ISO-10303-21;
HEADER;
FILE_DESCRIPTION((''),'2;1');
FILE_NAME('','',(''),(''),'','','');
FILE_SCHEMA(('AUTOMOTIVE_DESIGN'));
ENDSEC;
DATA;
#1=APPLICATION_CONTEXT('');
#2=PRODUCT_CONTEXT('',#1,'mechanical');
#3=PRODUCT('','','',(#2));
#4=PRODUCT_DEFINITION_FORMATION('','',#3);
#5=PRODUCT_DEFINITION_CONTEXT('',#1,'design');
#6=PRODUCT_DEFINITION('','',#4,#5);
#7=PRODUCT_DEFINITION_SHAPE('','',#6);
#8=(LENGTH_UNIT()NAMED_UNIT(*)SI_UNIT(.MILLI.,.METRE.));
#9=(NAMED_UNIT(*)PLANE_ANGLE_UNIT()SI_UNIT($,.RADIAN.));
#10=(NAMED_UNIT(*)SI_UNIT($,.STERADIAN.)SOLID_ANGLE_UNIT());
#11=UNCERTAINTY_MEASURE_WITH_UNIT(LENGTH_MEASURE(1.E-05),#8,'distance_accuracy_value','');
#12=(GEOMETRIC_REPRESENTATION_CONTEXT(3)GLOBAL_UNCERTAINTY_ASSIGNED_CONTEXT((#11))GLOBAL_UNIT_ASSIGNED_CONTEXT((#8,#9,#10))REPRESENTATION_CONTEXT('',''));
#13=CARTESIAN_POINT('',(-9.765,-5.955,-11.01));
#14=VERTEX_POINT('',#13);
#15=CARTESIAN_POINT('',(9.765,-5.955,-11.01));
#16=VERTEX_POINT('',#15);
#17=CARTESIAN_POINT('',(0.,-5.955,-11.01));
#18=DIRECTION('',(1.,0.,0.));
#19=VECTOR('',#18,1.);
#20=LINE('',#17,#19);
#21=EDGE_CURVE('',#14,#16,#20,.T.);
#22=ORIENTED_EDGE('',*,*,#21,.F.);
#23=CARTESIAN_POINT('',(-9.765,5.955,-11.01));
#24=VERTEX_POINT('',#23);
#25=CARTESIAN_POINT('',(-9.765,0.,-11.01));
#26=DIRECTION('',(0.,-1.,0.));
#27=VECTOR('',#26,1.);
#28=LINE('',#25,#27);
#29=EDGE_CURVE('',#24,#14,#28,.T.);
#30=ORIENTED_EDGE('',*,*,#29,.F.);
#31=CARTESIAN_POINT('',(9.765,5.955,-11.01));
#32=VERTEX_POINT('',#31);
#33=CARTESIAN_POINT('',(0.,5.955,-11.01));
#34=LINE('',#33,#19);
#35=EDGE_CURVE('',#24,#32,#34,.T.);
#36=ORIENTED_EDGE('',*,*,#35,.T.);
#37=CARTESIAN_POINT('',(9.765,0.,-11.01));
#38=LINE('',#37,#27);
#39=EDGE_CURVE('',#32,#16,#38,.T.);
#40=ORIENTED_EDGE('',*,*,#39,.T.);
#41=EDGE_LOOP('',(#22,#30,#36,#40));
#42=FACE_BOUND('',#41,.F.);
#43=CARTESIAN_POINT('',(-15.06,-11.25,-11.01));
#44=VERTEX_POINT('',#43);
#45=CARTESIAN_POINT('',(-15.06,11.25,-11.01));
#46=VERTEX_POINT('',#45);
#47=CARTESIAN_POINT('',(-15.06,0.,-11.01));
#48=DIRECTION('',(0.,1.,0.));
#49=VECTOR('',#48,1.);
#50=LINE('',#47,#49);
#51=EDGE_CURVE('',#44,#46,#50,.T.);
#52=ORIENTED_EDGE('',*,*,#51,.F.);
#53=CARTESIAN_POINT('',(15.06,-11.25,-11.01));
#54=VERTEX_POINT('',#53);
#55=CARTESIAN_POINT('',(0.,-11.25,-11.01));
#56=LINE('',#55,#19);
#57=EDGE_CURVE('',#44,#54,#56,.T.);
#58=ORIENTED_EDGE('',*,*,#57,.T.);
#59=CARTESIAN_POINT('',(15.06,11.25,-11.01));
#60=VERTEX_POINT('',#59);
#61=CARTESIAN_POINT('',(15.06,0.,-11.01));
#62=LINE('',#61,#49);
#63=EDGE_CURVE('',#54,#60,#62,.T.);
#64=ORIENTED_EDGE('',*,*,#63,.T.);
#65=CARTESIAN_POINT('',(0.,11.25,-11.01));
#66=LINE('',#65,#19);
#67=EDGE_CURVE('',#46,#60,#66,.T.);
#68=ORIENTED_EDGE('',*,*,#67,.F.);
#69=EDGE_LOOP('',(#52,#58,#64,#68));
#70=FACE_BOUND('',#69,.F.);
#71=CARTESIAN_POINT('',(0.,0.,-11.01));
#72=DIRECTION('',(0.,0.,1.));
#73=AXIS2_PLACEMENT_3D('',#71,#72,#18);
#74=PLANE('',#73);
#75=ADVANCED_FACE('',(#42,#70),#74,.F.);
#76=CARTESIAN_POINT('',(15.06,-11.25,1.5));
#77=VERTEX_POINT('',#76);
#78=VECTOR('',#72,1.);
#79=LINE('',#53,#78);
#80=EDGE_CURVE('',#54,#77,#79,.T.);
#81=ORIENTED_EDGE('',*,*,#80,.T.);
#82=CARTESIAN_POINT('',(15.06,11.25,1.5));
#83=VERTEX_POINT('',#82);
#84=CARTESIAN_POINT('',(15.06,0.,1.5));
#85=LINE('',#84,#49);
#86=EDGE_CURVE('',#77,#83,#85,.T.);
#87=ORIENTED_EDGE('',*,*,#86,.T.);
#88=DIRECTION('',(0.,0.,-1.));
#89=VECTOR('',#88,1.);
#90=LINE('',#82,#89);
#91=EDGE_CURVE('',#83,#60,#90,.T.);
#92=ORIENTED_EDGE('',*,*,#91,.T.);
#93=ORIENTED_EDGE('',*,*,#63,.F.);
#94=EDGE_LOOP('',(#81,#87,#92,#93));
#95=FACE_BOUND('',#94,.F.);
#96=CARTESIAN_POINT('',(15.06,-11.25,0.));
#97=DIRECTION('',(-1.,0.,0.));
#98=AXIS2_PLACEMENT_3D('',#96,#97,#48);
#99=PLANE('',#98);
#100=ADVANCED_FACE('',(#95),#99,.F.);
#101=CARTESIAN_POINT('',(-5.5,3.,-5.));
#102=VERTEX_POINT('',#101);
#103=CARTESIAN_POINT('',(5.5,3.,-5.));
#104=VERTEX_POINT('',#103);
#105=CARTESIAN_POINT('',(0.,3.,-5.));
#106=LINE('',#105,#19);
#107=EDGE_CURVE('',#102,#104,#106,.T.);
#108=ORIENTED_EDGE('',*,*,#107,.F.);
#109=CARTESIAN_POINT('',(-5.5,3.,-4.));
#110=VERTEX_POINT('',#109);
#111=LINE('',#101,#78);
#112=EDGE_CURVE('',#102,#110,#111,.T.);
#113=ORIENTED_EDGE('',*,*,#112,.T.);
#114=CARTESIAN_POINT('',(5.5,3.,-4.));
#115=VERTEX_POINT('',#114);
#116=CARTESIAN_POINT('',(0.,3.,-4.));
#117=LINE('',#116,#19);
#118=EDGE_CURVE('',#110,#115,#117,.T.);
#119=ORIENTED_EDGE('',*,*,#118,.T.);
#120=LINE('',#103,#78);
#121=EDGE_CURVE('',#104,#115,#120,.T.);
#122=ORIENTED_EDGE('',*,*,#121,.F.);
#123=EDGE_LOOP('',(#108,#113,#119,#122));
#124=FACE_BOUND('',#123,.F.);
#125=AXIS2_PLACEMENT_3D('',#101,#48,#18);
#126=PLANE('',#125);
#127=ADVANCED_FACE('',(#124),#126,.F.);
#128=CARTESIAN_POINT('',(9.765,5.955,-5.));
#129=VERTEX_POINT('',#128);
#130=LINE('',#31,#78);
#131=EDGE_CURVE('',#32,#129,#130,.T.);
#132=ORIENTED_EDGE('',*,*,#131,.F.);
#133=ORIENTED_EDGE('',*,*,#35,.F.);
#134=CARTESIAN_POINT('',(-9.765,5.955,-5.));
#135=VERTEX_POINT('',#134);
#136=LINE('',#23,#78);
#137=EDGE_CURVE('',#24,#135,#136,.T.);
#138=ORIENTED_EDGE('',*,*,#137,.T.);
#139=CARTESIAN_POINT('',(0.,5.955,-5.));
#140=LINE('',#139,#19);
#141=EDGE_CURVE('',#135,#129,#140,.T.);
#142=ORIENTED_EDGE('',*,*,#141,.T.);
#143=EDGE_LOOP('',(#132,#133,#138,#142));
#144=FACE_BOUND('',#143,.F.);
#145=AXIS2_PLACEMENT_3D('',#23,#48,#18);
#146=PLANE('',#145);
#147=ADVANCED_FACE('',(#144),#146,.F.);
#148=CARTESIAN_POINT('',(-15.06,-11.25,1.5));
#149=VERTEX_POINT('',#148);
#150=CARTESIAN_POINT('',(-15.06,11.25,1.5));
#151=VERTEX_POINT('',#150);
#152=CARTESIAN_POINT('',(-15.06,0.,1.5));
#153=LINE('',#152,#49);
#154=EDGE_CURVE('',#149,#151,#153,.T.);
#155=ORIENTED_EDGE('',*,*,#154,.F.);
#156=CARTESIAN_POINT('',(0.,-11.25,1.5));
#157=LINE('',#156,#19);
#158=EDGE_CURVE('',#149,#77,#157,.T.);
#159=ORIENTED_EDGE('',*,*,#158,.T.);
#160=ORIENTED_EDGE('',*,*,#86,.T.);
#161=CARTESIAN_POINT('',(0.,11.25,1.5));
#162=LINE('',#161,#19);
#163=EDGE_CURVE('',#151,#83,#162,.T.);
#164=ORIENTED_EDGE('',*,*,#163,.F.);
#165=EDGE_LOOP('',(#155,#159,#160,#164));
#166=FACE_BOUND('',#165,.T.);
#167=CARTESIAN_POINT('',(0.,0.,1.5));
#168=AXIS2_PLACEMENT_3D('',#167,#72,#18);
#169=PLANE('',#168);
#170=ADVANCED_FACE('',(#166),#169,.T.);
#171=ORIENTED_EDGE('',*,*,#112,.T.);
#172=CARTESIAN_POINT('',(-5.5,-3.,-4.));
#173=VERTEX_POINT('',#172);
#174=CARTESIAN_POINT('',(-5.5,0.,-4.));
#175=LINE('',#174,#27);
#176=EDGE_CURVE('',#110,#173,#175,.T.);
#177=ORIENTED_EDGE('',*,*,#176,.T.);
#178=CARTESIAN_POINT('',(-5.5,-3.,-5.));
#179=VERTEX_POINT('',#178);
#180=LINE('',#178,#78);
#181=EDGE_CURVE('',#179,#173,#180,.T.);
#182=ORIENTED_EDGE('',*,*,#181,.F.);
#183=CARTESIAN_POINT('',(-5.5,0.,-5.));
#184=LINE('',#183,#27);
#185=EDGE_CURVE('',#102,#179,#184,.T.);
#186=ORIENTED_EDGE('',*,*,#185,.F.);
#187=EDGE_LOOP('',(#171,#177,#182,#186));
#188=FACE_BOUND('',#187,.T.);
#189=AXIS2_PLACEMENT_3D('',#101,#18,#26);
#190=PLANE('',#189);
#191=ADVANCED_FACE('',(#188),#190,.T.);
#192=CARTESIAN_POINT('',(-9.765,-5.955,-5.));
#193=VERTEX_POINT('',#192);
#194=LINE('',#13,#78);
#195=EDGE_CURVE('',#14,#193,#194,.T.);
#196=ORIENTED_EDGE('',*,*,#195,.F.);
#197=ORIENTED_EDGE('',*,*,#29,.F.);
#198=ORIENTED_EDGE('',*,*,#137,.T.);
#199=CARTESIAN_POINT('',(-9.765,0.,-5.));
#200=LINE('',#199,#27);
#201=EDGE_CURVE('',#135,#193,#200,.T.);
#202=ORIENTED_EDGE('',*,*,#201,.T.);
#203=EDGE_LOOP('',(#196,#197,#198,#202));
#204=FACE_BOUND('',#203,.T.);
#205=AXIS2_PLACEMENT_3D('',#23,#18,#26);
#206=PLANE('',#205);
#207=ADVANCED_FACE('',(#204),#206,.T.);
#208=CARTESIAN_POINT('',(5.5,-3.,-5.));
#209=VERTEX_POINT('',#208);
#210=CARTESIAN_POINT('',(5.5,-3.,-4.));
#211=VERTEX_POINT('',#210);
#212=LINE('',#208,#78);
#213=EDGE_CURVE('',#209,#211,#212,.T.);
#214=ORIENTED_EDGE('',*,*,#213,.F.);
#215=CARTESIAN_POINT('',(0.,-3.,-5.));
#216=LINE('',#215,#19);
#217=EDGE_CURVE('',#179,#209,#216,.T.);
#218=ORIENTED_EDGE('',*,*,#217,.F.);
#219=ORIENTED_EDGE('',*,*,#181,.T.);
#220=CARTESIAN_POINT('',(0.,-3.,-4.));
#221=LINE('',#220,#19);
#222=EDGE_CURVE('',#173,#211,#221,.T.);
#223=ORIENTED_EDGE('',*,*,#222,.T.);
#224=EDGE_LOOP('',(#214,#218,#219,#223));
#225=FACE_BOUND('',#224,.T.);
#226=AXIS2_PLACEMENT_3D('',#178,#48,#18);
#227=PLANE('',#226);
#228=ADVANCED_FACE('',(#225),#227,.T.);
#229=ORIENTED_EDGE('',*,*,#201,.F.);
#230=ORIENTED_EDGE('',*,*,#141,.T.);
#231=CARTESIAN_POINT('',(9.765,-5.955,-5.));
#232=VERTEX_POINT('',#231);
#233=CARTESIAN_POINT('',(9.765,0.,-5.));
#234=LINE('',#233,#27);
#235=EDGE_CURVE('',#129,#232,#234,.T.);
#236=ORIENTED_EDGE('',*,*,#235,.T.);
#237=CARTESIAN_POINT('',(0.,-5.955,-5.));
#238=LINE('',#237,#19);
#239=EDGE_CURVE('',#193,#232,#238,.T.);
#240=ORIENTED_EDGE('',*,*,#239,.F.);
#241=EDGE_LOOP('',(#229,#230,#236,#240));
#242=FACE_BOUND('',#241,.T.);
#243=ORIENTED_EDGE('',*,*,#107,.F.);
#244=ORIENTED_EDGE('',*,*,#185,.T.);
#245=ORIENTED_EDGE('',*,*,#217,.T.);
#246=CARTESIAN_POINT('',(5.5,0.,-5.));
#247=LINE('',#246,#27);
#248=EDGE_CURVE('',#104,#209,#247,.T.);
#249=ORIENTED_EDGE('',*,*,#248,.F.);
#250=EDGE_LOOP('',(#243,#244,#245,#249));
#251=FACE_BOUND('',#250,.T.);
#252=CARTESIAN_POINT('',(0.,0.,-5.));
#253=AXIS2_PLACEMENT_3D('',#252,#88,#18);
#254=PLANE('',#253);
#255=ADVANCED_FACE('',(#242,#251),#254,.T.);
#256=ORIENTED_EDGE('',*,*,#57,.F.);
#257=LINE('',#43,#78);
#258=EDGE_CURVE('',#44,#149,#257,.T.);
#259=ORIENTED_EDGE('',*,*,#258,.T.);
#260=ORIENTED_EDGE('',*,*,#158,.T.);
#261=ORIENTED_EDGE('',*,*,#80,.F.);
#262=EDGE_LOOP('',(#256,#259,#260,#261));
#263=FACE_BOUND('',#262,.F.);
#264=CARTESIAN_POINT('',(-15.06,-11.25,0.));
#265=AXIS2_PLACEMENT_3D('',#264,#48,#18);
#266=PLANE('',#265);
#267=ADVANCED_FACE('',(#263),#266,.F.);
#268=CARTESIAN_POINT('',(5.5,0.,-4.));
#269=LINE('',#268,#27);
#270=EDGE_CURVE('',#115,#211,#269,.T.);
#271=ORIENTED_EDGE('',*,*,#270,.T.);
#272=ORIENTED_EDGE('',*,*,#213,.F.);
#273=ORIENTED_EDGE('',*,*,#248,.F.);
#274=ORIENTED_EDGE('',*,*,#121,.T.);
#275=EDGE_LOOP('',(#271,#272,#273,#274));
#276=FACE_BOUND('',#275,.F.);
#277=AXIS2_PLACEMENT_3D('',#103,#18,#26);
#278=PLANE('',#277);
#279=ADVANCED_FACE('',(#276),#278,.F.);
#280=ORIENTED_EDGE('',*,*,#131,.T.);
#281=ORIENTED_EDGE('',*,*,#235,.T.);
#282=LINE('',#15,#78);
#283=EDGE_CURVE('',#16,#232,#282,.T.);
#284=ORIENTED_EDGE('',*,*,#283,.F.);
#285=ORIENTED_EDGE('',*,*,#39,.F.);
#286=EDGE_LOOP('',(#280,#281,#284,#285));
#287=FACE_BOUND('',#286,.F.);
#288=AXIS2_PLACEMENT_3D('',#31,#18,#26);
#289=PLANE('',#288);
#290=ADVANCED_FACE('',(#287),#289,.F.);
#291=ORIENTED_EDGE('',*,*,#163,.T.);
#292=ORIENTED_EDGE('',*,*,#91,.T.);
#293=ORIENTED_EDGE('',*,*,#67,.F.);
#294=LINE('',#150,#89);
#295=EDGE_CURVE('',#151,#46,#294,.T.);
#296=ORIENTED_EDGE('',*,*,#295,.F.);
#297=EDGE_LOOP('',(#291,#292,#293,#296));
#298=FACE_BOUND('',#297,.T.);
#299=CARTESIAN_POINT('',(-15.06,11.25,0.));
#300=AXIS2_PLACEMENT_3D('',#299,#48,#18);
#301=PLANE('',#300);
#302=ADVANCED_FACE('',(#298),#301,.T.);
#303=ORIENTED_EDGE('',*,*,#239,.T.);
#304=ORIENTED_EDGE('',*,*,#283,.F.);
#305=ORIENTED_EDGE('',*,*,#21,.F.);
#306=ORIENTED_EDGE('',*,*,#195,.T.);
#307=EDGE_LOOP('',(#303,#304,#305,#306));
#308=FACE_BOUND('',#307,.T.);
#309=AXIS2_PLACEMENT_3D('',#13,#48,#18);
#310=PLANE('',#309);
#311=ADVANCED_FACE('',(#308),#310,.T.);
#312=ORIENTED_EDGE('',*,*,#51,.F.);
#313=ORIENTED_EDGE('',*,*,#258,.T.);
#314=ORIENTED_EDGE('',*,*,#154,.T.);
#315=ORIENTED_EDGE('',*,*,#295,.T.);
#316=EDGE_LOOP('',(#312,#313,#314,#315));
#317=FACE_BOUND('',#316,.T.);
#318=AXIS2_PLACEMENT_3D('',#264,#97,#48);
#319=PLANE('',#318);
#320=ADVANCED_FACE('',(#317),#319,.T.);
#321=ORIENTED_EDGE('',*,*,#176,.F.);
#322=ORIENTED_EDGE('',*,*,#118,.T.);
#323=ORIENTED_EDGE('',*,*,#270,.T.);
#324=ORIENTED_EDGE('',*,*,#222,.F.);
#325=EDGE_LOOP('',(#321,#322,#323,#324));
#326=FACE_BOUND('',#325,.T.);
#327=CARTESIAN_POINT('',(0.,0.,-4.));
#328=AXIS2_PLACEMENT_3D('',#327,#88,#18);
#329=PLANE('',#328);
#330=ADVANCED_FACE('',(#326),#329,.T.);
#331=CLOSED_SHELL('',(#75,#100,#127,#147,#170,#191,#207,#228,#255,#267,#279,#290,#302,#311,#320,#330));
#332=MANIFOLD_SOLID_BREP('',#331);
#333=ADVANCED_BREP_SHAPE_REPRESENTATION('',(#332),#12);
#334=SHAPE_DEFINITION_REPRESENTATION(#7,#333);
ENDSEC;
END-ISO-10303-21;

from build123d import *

# Parameters (mm, degrees)
F0_W     = 30.12
F0_H     = 22.5
F1_DEPTH = 11.01
F2_W     = 19.53
F2_H     = 11.91
F3_DEPTH = 6.01
F4_W     = 11
F4_H     = 6
F5_DEPTH = 1
F6_DEPTH = 1.5


with BuildPart() as f1:
    # F0 (on Top) → F1 (new body)
    with BuildSketch(Plane.XY):
        Rectangle(F0_W, F0_H)
    extrude(amount=-F1_DEPTH)

    # F2 (on face) → F3 (cut)
    with BuildSketch(Plane(origin=(0, 0, -11.01), x_dir=(1, 0, 0), z_dir=(0, 0, -1))):
        Rectangle(F2_W, F2_H)
    extrude(amount=-F3_DEPTH, mode=Mode.SUBTRACT)

    # F4 (on face) → F5 (cut)
    with BuildSketch(Plane(origin=(0, 0, -5), x_dir=(1, 0, 0), z_dir=(0, 0, -1))):
        Rectangle(F4_W, F4_H)
    extrude(amount=-F5_DEPTH, mode=Mode.SUBTRACT)

    # F6 (add): a face of the model
    f6_faces = [f1.faces().sort_by_distance(p)[0] for p in [
        (0, 0, 0),
    ]]
    extrude(f6_faces, amount=F6_DEPTH)


solid = f1.part
